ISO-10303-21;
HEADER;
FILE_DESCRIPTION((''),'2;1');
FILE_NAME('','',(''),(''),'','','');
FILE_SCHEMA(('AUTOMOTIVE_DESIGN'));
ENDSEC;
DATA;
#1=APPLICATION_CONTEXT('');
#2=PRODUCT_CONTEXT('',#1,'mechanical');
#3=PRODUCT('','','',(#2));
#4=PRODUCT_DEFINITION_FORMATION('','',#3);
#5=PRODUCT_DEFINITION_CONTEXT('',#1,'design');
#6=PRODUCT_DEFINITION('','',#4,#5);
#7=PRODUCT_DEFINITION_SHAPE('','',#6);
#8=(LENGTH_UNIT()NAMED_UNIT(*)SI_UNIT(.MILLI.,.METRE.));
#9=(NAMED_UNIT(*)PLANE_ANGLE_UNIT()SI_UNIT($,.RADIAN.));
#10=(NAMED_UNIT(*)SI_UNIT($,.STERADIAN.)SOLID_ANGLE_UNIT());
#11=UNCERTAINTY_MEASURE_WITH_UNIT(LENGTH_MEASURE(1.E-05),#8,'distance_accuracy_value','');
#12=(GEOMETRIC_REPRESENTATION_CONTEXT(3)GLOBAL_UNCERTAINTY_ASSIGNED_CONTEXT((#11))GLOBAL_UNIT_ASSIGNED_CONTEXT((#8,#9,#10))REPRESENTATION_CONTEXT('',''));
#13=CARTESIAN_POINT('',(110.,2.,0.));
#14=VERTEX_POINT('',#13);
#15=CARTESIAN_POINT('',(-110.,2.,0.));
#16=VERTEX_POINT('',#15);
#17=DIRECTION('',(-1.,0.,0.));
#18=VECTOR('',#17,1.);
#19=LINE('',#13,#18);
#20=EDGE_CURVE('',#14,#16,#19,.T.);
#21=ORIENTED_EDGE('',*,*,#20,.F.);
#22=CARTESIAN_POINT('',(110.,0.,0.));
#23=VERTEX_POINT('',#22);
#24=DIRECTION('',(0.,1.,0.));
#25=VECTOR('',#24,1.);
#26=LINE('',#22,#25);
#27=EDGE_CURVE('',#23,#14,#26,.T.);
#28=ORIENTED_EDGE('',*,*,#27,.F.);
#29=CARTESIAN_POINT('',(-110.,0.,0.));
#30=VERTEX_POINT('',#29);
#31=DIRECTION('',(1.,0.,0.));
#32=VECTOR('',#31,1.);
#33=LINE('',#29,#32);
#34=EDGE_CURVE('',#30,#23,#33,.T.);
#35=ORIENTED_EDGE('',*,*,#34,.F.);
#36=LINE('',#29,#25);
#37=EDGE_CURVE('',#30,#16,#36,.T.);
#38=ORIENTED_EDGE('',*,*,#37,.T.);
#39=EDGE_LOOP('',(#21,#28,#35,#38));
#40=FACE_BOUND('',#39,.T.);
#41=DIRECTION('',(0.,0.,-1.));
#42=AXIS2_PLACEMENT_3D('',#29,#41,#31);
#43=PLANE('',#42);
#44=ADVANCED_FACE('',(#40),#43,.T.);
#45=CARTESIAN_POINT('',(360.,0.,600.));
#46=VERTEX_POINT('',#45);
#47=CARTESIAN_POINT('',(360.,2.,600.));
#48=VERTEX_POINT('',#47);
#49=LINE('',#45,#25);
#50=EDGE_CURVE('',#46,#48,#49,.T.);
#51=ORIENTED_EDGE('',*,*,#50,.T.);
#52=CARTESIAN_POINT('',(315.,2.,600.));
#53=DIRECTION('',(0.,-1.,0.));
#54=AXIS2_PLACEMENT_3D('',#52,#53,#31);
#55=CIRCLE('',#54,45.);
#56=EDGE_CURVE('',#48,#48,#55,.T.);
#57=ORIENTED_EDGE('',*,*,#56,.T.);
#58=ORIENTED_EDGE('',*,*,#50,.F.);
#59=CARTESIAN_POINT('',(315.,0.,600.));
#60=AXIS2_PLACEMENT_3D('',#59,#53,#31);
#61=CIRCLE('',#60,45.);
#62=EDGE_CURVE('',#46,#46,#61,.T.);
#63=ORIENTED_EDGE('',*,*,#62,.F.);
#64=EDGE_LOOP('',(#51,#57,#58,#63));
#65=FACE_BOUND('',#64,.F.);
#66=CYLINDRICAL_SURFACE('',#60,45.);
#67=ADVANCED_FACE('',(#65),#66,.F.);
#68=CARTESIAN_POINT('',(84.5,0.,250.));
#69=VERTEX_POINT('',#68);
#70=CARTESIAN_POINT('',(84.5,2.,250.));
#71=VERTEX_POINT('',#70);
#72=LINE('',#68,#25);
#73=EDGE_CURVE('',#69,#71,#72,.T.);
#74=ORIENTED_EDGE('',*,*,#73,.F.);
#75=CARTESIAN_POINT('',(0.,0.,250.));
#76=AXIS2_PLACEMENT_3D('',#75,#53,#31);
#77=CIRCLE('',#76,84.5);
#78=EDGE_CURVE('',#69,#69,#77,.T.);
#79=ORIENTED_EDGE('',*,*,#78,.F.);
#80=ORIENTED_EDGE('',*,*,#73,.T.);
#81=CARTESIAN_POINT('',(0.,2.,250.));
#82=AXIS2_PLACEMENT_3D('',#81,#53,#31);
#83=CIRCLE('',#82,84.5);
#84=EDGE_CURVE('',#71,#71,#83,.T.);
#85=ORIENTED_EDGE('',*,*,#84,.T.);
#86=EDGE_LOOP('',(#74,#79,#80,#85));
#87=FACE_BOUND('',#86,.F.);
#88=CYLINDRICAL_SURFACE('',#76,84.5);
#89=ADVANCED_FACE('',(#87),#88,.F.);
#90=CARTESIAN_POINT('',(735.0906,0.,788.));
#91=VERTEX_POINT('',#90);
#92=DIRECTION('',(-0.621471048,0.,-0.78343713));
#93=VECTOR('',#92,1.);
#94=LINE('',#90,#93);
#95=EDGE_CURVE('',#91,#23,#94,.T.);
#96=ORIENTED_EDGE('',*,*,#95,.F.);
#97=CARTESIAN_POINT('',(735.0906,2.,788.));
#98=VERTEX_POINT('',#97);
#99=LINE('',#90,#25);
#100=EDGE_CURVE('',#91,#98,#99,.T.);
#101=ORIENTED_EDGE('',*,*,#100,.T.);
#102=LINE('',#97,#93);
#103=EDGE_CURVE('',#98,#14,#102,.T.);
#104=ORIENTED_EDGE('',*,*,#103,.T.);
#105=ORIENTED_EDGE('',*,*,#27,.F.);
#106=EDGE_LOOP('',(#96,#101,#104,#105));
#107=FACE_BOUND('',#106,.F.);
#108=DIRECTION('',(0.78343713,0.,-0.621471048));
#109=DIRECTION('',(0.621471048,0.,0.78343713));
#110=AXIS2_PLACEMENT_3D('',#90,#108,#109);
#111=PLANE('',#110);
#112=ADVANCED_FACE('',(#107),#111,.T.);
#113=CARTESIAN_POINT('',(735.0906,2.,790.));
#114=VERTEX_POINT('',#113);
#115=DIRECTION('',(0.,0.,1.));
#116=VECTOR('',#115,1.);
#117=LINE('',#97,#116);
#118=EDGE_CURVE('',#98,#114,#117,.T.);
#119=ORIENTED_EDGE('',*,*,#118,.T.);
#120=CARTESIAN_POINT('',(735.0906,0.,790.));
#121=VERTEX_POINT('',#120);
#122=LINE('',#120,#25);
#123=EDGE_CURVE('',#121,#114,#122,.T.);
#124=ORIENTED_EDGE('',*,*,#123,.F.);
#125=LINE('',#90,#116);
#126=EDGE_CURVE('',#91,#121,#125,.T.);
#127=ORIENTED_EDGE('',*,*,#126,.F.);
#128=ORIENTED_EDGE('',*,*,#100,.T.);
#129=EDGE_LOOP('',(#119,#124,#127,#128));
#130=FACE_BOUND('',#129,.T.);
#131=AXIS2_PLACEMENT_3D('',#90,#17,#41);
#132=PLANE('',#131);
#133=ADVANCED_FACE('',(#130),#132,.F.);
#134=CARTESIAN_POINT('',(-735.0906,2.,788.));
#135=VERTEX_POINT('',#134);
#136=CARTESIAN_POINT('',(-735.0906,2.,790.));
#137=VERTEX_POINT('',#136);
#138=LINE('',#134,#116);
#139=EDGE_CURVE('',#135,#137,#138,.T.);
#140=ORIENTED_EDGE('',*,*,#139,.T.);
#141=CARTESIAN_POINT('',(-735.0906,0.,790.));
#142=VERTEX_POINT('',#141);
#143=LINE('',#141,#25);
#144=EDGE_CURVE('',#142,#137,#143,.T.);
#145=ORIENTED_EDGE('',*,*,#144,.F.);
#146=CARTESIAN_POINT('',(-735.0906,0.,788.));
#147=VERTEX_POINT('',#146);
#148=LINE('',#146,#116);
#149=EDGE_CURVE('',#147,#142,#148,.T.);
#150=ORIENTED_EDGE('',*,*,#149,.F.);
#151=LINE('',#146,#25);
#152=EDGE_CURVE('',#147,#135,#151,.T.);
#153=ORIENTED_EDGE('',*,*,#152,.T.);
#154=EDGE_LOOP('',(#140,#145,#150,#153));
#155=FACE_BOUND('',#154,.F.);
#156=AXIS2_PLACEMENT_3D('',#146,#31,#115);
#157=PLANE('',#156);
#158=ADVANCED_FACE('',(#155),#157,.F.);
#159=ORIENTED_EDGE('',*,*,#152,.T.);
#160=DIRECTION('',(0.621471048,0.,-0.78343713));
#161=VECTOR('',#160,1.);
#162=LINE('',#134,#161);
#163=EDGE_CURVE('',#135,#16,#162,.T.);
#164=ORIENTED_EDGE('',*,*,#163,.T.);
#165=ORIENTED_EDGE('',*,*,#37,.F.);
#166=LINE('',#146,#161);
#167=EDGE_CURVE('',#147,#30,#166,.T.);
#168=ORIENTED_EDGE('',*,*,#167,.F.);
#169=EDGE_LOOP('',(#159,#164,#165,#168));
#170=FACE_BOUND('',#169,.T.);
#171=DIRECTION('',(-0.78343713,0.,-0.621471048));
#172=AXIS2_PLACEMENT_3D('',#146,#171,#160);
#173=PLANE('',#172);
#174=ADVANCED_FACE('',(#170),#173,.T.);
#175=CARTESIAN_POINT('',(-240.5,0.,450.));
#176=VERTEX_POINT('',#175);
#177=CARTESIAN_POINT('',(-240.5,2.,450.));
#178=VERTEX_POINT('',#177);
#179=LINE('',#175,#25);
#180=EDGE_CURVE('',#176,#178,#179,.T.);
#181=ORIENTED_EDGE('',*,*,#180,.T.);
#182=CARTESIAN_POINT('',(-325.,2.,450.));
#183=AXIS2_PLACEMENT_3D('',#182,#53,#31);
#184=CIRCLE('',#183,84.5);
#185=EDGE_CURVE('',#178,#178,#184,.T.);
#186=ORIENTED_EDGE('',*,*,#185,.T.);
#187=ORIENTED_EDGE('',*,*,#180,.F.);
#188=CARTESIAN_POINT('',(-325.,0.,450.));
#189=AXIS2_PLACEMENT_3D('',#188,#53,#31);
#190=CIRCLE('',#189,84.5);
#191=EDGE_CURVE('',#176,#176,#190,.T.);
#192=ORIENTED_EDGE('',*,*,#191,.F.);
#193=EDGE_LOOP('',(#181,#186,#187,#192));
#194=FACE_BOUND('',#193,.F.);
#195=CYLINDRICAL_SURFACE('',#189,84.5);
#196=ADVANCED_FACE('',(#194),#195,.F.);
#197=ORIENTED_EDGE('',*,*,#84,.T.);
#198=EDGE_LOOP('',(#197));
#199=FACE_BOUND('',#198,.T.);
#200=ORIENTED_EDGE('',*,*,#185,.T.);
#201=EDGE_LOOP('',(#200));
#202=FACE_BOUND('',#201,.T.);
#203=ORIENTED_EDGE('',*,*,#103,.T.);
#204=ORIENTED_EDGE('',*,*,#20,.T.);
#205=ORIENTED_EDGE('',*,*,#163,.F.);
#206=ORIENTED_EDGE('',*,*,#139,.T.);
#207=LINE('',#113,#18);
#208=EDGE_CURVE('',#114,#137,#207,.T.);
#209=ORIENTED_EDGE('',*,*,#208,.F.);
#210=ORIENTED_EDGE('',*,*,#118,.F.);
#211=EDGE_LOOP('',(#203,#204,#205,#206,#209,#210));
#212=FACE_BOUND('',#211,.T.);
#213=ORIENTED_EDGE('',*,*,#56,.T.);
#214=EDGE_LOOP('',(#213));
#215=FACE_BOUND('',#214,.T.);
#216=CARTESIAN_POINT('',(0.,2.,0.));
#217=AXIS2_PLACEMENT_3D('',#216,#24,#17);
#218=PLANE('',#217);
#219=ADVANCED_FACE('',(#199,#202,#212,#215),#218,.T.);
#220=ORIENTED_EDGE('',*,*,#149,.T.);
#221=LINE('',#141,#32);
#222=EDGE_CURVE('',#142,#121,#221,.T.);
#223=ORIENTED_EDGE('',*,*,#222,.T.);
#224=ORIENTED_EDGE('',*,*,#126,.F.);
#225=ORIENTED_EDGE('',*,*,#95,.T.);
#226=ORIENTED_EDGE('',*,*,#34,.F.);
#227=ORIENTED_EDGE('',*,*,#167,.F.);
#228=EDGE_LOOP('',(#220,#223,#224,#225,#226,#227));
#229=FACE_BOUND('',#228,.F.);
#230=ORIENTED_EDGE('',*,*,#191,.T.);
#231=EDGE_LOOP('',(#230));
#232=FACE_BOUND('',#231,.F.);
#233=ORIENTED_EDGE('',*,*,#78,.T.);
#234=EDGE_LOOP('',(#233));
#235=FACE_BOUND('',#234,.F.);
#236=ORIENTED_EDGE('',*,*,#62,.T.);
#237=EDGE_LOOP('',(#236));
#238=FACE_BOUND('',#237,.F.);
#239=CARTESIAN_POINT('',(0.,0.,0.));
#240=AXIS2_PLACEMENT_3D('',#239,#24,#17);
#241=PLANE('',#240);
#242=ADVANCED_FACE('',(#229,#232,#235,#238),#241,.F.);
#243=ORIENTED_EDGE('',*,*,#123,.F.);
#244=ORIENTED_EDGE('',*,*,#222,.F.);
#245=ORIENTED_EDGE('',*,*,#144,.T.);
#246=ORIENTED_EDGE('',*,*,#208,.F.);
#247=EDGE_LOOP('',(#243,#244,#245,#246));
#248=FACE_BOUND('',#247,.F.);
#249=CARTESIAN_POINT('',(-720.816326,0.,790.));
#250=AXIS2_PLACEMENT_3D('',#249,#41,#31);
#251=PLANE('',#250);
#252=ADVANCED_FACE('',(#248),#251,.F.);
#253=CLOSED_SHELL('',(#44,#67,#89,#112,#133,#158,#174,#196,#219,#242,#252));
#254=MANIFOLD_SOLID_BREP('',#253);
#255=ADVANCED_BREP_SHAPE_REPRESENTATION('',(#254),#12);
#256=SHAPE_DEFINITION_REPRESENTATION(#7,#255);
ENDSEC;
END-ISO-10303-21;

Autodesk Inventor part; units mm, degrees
ref_plane "YZ Plane" through (0, 0, 0) normal (1, 0, 0) x (0, 1, 0)
ref_plane "XZ Plane" through (0, 0, 0) normal (0, 1, 0) x (-1, 0, 0)
ref_plane "XY Plane" through (0, 0, 0) normal (0, 0, 1) x (1, 0, 0)
sketch "Sketch1" plane through (0, 0, 0) normal (0, 1, 0) x (-1, 0, 0)
  line L0 (0, 790) -> (0, 0)
  line L1 (735.0906, 788) -> (735.0906, 790)
  line L2 (735.0906, 790) -> (0, 790)
  line L3 (735.0906, 788) -> (110, 0)
  line L4 (110, 0) -> (0, 0)
  line L5 (735.9762, 809.1108) -> (102.084, 10.0153)
  point P0 (648.1236, 678.3679)
  point P1 (0, 678)
  dimension "d1" = 735.0906
  dimension "d2" = 2
  dimension "d5" = 128.424
  dimension "d6" = 110
  dimension "d9" = 790
  dimension "d28" = 128.424
extrude "Plate1" add sketch "Sketch1" along normal blind 2
mirror "Mirror1" about plane through (0, 0, 0) normal (1, 0, 0)
sketch "Sketch2" plane through (0, 0, 0) normal (0, -1, 0) x (1, 0, 0)
  line L0 (-110, 0) -> (110, 0) construction
  line L1 (-110, 0) -> (-735.0906, 788) construction
  circle A0 centre (-325, 450) radius 84.5
  line L2 (110, 0) -> (735.0906, 788) construction
  circle A1 centre (0, 250) radius 84.5
  circle A2 centre (315, 600) radius 45
  line L3 (-110, 0) -> (110, 0) construction
  line L4 (-240.5, 450) -> (-240.5, 164.5105) construction
  line L5 (-84.5, 250) -> (-84.5, 0) construction
  line L6 (84.5, 250) -> (84.5, 0) construction
  line L7 (270, 600) -> (270, 0) construction
  line L8 (-325, 534.5) -> (270, 534.5) construction
  line L9 (-325, 365.5) -> (270, 365.5) construction
  line L10 (0, 334.5) -> (270, 334.5) construction
  line L11 (315, 555) -> (270, 555) construction
  line L12 (-735.0906, 790) -> (735.0906, 790) projected
  line L13 (-735.0906, 788) -> (-735.0906, 790) projected
  line L14 (735.0906, 788) -> (735.0906, 790) projected
  point P0 (0, 0)
  point P1 (0, 0)
  point P2 (0, 0)
  point P3 (0, 0)
  point P4 (-84.5, 144.3746)
  point P5 (0, 0)
  point P6 (0, 0)
  dimension "d13" = 169
  dimension "d16" = 250
  dimension "d17" = 450
  dimension "d18" = 325
  dimension "d19" = 31
  dimension "d20" = 90
  dimension "d21" = 156
  dimension "d23" = 315
  dimension "d24" = 600
extrude "Extrusion1" cut sketch "Sketch2" against normal through all
sketch "Sketch3" plane through (0, 0, 0) normal (0, -1, 0) x (1, 0, 0)
  line L0 (-55, 616) -> (-55, 628) construction
  line L1 (-55, 628) -> (55, 628) construction
  line L2 (55, 628) -> (55, 616) construction
  line L3 (55, 616) -> (-55, 616) construction
  line L4 (-663.2335, 678) -> (663.2335, 678) projected
  point P0 (0, 0)
  point P1 (0, 616)
  point P2 (0, 678)
  dimension "d25" = 12
  dimension "d26" = 110
  dimension "d27" = 50
mark "Mark1"
equation "\"d3\" = Thickness"
equation "\"BendReliefWidth\" = Thickness"
equation "\"BendReliefDepth\" = 0.5 * Thickness"
equation "\"CornerReliefSize\" = 4 * Thickness"
equation "\"MinimumRemnant\" = 2 * Thickness"
equation "\"GapSize\" = Thickness"
equation "\"Thickness\" = 2"
properties part number "MSC 701 face 1" material "Stainless Steel"
